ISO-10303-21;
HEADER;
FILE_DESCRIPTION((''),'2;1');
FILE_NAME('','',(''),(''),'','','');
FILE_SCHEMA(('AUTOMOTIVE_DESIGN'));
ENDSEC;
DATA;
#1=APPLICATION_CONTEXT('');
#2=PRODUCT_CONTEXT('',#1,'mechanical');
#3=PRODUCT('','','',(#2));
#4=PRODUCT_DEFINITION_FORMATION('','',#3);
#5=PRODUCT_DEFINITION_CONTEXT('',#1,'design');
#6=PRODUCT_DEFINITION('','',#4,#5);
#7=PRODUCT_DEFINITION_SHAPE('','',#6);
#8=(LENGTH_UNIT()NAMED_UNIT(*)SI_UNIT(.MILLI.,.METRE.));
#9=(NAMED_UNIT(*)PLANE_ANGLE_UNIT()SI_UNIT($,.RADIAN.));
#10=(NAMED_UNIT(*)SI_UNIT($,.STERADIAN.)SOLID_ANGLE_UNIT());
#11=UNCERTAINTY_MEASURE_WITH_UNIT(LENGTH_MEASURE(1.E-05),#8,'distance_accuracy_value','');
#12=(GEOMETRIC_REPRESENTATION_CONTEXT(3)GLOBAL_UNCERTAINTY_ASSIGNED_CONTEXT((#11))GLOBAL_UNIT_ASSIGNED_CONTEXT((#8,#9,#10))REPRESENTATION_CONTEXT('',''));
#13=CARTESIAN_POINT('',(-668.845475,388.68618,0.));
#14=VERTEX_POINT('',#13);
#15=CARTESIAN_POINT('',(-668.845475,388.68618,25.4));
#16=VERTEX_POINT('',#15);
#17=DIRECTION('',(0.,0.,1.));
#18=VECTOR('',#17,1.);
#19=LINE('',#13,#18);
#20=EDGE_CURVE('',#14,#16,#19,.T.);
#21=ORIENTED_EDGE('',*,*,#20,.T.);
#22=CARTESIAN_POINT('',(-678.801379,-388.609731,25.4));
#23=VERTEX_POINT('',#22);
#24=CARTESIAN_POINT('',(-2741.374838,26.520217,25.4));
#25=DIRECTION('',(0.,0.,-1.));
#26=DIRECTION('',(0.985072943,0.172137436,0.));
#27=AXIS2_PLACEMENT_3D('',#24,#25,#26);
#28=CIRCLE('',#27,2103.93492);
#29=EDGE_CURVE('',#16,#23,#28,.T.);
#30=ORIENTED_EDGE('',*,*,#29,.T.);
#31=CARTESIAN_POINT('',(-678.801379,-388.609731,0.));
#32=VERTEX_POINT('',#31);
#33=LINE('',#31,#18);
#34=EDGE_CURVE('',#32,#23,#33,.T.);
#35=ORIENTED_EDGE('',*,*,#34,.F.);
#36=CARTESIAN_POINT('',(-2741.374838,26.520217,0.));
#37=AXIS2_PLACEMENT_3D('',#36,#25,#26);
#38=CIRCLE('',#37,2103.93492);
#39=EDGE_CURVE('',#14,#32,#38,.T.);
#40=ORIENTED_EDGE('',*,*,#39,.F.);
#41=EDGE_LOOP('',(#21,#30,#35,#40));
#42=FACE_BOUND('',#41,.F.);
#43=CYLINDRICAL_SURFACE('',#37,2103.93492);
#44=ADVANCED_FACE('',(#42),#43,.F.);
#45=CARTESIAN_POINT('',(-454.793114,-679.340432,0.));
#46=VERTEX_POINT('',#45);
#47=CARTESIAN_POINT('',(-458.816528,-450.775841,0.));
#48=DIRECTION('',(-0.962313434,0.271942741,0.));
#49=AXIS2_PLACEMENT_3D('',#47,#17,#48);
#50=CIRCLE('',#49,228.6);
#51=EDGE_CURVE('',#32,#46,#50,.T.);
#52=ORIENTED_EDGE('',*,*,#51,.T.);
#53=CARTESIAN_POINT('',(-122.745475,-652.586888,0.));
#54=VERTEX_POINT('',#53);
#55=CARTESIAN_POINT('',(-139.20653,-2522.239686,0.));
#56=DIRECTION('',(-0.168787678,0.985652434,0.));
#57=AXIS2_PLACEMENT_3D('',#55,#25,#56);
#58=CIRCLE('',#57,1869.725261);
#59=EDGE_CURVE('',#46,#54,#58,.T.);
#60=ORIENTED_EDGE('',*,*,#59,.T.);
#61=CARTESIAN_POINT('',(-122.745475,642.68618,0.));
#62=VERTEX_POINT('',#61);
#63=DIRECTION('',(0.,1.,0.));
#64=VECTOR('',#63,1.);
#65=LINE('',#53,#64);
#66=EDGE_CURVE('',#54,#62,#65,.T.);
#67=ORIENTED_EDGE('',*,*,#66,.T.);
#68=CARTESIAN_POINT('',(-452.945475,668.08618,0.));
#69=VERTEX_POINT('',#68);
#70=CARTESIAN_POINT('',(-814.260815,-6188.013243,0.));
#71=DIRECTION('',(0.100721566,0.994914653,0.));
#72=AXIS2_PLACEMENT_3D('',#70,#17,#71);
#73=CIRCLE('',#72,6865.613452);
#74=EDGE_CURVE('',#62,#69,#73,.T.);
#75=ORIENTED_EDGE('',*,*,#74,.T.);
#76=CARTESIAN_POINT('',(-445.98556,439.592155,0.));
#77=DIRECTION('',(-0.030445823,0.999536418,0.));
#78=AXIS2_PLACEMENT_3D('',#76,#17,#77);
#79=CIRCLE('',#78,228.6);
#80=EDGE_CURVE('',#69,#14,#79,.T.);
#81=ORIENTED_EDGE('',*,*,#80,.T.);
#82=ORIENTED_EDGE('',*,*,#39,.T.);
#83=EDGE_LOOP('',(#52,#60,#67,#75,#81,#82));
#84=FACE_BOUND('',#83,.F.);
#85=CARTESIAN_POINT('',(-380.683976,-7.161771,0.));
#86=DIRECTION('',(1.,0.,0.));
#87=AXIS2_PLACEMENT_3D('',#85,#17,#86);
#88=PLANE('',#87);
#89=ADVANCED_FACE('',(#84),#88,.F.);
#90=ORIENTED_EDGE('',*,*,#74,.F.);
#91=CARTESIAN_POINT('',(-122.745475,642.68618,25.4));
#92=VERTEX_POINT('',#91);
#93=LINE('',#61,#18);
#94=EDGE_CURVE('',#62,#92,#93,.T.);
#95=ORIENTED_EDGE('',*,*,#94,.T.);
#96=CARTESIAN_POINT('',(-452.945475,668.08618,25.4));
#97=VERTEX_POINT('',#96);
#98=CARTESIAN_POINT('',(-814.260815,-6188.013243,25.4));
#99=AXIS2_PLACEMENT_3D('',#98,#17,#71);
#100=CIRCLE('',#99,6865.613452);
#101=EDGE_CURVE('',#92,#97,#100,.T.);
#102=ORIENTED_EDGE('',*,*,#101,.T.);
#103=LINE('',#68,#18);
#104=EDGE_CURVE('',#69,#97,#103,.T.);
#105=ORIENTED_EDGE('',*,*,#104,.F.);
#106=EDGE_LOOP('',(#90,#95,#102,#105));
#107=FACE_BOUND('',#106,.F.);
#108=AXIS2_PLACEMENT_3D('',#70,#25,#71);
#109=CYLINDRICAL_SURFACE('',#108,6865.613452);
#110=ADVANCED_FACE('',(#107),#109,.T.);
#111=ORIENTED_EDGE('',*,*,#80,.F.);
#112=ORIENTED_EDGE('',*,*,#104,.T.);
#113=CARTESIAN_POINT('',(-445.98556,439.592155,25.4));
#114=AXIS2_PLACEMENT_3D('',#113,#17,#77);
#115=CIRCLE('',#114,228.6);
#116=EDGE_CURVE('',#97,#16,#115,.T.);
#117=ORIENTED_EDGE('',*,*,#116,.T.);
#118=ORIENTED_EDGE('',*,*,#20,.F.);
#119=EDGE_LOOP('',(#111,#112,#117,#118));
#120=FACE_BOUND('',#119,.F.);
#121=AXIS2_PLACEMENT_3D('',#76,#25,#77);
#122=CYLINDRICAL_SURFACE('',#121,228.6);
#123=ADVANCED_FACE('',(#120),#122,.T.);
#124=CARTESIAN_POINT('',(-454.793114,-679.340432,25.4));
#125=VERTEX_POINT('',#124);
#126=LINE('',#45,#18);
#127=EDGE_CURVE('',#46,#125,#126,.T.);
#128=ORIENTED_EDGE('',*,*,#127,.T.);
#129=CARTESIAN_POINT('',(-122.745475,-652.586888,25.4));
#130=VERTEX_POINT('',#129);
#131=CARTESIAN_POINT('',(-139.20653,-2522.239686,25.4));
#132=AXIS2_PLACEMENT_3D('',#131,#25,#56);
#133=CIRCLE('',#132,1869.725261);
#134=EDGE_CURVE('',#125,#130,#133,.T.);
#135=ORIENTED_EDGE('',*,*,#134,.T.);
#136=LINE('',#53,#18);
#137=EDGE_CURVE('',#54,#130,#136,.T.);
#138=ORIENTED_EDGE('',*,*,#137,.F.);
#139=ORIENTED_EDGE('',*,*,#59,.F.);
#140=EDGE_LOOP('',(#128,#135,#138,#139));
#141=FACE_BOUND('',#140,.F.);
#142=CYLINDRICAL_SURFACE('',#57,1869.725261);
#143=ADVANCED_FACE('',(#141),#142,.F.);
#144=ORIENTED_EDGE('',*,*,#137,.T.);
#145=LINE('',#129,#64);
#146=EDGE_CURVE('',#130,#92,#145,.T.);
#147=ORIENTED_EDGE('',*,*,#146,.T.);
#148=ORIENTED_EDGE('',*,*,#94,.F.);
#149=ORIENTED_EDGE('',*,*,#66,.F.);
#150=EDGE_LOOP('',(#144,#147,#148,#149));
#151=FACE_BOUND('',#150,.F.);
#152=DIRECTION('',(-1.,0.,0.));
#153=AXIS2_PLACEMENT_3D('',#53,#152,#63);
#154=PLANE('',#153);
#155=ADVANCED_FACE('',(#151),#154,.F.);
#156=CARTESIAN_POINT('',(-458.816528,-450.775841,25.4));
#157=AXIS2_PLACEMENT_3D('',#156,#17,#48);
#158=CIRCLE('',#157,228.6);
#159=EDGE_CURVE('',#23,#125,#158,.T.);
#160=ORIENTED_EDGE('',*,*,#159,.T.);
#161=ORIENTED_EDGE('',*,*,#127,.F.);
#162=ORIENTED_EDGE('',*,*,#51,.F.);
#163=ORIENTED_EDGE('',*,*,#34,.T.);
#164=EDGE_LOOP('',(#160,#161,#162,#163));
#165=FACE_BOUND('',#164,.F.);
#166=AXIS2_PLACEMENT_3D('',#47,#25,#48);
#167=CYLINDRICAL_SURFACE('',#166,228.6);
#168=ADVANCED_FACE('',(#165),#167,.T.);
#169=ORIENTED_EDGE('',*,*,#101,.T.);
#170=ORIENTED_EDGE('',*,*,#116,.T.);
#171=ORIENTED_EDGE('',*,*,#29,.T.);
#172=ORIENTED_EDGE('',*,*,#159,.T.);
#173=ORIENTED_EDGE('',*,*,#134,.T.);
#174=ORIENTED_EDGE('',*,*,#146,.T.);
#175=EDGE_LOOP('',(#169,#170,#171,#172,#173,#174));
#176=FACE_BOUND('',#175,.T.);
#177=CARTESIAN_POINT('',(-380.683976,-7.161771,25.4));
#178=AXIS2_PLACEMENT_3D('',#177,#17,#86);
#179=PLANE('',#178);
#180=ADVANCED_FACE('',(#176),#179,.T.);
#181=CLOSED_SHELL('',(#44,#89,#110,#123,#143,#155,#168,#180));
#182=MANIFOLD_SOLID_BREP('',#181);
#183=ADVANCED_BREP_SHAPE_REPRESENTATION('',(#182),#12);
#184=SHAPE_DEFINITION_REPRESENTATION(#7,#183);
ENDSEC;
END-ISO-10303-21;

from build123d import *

# Parameters (mm, degrees)
F1_DEPTH = 25.4


# Not quite as in the source:
# - a feature names something its author has since deleted; it is built from what else it names


with BuildPart() as f1:
    # F0 (on Top) → F1 (new body)
    with BuildSketch(Plane.XY):
        with BuildLine():
            Line((-122.74547472, 388.6861801147), (-122.74547472, 642.6861801147))
            ThreePointArc((-122.74547472, 642.6861801147), (-287.6923004816, 657.3774452139), (-452.94547472, 668.0861801147))
            ThreePointArc((-452.94547472, 668.0861801147), (-626.8733109875, 579.3690535942), (-668.84547472, 388.6861801147))
            ThreePointArc((-668.84547472, 388.6861801147), (-637.6124772586, -0.4255791053), (-678.8013792429, -388.6097308259))
            ThreePointArc((-678.8013792429, -388.6097308259), (-639.8991633536, -590.3001733537), (-454.793114458, -679.3404320597))
            ThreePointArc((-454.793114458, -679.3404320597), (-289.3663068571, -658.5539308279), (-122.74547472, -652.5868876355))
            Line((-122.74547472, -652.5868876355), (-122.74547472, 388.6861801147))
        make_face()
    extrude(amount=F1_DEPTH)


solid = f1.part
